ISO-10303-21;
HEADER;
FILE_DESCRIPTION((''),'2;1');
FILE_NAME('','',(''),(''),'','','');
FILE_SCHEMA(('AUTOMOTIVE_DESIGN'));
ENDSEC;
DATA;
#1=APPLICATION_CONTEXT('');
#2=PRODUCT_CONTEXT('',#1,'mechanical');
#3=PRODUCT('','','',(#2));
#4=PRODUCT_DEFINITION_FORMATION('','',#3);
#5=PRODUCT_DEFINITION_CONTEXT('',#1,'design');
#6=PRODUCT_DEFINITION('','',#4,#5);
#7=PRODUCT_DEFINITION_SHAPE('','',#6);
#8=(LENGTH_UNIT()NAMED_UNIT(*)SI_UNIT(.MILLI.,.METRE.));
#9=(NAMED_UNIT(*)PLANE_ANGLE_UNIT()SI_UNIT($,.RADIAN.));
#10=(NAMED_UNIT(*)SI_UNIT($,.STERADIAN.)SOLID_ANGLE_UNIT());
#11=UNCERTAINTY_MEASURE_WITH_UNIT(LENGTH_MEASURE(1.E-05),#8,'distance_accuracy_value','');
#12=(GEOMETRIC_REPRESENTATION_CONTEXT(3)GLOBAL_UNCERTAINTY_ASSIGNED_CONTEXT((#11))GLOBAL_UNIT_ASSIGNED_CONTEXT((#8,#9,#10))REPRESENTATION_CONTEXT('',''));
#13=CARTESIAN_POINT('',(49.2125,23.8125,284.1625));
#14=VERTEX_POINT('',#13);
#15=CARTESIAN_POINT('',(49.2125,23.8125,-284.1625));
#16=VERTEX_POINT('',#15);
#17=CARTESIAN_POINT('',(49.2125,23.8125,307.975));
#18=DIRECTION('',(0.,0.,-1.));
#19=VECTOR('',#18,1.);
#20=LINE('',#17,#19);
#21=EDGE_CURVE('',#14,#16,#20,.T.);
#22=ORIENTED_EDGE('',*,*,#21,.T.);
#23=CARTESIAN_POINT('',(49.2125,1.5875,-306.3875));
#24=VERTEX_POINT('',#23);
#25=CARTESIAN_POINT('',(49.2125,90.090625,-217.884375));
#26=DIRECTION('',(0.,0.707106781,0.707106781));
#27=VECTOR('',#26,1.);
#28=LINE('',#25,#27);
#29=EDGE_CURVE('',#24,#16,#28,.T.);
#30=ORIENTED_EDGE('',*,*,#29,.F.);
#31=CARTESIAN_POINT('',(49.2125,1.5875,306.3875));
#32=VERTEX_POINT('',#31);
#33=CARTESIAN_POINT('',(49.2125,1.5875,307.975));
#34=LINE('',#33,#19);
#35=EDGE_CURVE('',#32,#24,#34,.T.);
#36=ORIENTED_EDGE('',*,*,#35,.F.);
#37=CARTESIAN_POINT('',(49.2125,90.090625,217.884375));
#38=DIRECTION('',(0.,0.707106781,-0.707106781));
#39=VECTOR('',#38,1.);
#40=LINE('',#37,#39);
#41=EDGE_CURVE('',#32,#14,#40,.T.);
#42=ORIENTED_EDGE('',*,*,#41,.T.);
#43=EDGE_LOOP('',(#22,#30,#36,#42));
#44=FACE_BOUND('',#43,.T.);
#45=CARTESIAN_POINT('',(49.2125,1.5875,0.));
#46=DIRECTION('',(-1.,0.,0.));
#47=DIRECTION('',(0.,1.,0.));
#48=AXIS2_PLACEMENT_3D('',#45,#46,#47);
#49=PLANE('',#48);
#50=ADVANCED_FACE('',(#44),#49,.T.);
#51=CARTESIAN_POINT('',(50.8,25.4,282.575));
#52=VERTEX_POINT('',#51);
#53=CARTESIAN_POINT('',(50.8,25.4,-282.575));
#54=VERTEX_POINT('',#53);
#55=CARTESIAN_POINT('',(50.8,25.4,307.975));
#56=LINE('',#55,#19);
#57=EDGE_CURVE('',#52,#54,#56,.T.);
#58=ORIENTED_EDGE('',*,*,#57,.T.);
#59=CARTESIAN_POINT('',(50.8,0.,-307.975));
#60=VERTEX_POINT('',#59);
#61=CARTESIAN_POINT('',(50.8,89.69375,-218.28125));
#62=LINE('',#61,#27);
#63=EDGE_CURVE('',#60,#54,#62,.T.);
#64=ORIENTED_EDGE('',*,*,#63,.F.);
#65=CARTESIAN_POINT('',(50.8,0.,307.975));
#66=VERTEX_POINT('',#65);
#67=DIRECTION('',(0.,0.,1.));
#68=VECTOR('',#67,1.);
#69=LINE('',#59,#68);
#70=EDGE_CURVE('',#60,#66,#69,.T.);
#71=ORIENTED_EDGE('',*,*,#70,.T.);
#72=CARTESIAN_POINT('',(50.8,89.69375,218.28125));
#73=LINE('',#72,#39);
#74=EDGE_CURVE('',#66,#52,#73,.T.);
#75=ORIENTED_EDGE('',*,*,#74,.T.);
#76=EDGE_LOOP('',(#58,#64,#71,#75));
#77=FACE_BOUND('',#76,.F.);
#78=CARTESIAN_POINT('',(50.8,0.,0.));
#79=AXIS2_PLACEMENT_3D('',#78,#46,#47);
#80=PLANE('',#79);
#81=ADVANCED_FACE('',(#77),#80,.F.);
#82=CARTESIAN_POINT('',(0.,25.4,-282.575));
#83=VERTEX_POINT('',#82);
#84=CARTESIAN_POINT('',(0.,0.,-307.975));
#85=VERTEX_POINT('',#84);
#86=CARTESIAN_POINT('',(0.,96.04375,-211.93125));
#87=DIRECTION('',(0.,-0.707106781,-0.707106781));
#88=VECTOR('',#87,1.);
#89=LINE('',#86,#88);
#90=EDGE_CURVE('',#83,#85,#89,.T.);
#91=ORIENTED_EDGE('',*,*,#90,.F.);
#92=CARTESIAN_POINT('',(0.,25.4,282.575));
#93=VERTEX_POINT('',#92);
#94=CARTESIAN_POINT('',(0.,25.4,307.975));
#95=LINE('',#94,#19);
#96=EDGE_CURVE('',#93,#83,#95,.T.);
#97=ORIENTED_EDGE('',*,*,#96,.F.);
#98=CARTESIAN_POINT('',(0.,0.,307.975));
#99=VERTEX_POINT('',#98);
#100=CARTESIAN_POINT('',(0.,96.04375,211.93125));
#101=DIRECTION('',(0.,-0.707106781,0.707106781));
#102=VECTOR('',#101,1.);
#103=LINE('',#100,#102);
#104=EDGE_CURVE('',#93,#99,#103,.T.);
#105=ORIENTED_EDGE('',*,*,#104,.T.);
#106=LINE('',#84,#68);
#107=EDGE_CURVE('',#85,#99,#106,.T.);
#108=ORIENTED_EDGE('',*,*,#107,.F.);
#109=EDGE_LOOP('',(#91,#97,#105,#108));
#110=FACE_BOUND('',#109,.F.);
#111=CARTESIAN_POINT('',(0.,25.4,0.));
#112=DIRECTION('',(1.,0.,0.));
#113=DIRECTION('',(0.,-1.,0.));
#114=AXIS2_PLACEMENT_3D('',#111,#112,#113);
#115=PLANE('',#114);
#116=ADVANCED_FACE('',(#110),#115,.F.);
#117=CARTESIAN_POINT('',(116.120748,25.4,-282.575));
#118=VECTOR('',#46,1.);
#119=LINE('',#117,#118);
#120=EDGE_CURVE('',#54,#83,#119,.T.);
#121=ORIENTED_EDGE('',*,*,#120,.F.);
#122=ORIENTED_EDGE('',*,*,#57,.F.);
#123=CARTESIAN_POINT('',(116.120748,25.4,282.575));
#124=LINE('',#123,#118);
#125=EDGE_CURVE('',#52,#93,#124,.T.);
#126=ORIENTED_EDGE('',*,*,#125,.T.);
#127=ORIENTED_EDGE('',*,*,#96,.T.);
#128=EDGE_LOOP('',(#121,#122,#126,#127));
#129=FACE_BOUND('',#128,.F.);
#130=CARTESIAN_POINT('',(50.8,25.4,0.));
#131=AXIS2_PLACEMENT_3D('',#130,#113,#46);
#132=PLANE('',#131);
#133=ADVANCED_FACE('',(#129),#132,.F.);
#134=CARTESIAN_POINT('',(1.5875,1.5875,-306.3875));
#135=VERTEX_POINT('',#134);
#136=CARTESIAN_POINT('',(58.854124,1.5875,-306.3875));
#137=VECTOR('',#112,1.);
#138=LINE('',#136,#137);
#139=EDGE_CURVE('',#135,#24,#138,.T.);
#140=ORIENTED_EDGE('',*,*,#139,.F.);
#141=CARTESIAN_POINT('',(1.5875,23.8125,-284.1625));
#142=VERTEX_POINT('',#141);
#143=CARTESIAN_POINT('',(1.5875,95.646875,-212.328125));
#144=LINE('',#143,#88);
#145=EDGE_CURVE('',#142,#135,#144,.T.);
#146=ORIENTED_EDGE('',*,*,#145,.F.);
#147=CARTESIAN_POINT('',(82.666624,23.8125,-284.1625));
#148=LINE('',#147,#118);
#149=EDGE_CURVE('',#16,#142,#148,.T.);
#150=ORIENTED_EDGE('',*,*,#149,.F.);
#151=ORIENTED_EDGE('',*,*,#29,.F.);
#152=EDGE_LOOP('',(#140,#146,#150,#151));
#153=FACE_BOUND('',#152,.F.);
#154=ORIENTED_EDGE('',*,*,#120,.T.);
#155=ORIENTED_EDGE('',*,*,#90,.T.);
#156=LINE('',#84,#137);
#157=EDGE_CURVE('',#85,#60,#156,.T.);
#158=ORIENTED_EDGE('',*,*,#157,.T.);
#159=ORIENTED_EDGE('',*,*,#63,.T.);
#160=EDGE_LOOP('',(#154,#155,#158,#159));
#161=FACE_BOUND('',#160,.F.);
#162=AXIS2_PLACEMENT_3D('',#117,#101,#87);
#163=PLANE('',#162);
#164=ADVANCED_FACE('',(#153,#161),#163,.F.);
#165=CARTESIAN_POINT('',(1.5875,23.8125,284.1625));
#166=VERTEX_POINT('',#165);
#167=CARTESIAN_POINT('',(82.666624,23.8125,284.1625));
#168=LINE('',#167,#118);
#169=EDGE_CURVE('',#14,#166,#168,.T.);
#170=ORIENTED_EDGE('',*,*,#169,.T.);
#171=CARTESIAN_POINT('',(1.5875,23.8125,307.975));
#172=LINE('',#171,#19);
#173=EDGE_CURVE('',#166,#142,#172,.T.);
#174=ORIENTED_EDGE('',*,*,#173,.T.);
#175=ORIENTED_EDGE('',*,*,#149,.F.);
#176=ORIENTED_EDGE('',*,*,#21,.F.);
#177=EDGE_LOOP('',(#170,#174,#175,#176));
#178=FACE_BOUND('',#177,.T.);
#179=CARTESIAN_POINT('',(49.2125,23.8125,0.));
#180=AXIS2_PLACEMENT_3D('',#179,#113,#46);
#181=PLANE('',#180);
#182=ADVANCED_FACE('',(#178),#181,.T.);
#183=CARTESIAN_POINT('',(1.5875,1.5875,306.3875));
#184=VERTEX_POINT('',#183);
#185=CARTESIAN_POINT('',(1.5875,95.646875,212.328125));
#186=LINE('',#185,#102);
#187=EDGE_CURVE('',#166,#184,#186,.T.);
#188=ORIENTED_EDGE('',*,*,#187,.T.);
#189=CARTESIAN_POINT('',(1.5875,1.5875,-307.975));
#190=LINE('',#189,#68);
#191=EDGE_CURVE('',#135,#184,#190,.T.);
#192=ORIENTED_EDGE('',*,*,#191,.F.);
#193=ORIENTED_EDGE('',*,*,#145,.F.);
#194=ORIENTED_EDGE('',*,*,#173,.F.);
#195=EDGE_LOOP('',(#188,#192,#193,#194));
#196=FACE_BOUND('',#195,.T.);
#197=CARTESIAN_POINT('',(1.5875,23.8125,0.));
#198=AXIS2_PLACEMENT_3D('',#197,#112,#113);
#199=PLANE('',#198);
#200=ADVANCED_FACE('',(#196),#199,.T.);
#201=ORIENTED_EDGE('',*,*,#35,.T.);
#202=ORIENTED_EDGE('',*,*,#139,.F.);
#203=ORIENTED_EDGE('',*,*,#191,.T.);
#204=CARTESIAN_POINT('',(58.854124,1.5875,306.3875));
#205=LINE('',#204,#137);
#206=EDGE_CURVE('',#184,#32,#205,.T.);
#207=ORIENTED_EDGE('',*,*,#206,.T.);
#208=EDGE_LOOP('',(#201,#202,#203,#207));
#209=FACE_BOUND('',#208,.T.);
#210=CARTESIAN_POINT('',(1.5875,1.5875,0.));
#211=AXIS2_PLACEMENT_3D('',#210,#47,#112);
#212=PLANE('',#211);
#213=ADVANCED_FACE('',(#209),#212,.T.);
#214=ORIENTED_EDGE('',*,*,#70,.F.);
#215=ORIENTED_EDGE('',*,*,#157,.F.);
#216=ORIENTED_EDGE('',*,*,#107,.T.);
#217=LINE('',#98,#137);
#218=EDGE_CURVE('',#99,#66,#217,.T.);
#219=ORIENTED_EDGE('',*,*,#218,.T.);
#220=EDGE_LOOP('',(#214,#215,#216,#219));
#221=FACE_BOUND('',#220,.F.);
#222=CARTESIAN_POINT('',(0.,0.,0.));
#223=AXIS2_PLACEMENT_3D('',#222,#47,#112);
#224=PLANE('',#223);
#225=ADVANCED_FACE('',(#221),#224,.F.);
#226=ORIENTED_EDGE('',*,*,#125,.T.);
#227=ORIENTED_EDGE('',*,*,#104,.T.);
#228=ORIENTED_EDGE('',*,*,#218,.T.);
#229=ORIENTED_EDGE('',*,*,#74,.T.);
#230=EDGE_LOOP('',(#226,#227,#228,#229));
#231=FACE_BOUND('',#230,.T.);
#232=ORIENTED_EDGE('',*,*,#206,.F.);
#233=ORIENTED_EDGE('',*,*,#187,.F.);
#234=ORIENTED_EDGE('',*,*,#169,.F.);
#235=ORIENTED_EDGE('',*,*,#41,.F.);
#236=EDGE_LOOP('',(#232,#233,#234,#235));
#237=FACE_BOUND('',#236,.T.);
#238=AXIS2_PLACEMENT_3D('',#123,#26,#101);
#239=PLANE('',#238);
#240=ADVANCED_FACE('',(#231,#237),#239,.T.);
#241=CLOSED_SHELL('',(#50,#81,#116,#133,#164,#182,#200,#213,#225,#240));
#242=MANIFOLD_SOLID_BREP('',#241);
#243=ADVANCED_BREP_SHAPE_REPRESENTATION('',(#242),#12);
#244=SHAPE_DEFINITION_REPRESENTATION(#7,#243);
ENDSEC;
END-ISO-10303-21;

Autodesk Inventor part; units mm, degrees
ref_plane "YZ Plane" through (0, 0, 0) normal (1, 0, 0) x (0, 1, 0)
ref_plane "XZ Plane" through (0, 0, 0) normal (0, 1, 0) x (-1, 0, 0)
ref_plane "XY Plane" through (0, 0, 0) normal (0, 0, 1) x (1, 0, 0)
sketch "Sketch1" plane through (0, 0, 0) normal (0, 0, 1) x (1, 0, 0)
  line L0 (0, 0) -> (50.8, 0)
  line L1 (50.8, 0) -> (50.8, 25.4)
  line L2 (50.8, 25.4) -> (0, 25.4)
  line L3 (0, 25.4) -> (0, 0)
  line L4 (1.5875, 1.5875) -> (49.2125, 1.5875)
  line L5 (49.2125, 1.5875) -> (49.2125, 23.8125)
  line L6 (49.2125, 23.8125) -> (1.5875, 23.8125)
  line L7 (1.5875, 23.8125) -> (1.5875, 1.5875)
  dimension "d0" = 50.8
  dimension "d1" = 25.4
  dimension "d2" = 1.5875
extrude "Extrusion1" add sketch "Sketch1" along normal mid plane 615.95
chamfer "Chamfer1" distance 25.4 angle 45 2 edges at (25.4, 25.4, 307.975) (25.4, 25.4, -307.975)
properties part number "FRA_006_FrontMainRail" material "Aluminum 6061"
